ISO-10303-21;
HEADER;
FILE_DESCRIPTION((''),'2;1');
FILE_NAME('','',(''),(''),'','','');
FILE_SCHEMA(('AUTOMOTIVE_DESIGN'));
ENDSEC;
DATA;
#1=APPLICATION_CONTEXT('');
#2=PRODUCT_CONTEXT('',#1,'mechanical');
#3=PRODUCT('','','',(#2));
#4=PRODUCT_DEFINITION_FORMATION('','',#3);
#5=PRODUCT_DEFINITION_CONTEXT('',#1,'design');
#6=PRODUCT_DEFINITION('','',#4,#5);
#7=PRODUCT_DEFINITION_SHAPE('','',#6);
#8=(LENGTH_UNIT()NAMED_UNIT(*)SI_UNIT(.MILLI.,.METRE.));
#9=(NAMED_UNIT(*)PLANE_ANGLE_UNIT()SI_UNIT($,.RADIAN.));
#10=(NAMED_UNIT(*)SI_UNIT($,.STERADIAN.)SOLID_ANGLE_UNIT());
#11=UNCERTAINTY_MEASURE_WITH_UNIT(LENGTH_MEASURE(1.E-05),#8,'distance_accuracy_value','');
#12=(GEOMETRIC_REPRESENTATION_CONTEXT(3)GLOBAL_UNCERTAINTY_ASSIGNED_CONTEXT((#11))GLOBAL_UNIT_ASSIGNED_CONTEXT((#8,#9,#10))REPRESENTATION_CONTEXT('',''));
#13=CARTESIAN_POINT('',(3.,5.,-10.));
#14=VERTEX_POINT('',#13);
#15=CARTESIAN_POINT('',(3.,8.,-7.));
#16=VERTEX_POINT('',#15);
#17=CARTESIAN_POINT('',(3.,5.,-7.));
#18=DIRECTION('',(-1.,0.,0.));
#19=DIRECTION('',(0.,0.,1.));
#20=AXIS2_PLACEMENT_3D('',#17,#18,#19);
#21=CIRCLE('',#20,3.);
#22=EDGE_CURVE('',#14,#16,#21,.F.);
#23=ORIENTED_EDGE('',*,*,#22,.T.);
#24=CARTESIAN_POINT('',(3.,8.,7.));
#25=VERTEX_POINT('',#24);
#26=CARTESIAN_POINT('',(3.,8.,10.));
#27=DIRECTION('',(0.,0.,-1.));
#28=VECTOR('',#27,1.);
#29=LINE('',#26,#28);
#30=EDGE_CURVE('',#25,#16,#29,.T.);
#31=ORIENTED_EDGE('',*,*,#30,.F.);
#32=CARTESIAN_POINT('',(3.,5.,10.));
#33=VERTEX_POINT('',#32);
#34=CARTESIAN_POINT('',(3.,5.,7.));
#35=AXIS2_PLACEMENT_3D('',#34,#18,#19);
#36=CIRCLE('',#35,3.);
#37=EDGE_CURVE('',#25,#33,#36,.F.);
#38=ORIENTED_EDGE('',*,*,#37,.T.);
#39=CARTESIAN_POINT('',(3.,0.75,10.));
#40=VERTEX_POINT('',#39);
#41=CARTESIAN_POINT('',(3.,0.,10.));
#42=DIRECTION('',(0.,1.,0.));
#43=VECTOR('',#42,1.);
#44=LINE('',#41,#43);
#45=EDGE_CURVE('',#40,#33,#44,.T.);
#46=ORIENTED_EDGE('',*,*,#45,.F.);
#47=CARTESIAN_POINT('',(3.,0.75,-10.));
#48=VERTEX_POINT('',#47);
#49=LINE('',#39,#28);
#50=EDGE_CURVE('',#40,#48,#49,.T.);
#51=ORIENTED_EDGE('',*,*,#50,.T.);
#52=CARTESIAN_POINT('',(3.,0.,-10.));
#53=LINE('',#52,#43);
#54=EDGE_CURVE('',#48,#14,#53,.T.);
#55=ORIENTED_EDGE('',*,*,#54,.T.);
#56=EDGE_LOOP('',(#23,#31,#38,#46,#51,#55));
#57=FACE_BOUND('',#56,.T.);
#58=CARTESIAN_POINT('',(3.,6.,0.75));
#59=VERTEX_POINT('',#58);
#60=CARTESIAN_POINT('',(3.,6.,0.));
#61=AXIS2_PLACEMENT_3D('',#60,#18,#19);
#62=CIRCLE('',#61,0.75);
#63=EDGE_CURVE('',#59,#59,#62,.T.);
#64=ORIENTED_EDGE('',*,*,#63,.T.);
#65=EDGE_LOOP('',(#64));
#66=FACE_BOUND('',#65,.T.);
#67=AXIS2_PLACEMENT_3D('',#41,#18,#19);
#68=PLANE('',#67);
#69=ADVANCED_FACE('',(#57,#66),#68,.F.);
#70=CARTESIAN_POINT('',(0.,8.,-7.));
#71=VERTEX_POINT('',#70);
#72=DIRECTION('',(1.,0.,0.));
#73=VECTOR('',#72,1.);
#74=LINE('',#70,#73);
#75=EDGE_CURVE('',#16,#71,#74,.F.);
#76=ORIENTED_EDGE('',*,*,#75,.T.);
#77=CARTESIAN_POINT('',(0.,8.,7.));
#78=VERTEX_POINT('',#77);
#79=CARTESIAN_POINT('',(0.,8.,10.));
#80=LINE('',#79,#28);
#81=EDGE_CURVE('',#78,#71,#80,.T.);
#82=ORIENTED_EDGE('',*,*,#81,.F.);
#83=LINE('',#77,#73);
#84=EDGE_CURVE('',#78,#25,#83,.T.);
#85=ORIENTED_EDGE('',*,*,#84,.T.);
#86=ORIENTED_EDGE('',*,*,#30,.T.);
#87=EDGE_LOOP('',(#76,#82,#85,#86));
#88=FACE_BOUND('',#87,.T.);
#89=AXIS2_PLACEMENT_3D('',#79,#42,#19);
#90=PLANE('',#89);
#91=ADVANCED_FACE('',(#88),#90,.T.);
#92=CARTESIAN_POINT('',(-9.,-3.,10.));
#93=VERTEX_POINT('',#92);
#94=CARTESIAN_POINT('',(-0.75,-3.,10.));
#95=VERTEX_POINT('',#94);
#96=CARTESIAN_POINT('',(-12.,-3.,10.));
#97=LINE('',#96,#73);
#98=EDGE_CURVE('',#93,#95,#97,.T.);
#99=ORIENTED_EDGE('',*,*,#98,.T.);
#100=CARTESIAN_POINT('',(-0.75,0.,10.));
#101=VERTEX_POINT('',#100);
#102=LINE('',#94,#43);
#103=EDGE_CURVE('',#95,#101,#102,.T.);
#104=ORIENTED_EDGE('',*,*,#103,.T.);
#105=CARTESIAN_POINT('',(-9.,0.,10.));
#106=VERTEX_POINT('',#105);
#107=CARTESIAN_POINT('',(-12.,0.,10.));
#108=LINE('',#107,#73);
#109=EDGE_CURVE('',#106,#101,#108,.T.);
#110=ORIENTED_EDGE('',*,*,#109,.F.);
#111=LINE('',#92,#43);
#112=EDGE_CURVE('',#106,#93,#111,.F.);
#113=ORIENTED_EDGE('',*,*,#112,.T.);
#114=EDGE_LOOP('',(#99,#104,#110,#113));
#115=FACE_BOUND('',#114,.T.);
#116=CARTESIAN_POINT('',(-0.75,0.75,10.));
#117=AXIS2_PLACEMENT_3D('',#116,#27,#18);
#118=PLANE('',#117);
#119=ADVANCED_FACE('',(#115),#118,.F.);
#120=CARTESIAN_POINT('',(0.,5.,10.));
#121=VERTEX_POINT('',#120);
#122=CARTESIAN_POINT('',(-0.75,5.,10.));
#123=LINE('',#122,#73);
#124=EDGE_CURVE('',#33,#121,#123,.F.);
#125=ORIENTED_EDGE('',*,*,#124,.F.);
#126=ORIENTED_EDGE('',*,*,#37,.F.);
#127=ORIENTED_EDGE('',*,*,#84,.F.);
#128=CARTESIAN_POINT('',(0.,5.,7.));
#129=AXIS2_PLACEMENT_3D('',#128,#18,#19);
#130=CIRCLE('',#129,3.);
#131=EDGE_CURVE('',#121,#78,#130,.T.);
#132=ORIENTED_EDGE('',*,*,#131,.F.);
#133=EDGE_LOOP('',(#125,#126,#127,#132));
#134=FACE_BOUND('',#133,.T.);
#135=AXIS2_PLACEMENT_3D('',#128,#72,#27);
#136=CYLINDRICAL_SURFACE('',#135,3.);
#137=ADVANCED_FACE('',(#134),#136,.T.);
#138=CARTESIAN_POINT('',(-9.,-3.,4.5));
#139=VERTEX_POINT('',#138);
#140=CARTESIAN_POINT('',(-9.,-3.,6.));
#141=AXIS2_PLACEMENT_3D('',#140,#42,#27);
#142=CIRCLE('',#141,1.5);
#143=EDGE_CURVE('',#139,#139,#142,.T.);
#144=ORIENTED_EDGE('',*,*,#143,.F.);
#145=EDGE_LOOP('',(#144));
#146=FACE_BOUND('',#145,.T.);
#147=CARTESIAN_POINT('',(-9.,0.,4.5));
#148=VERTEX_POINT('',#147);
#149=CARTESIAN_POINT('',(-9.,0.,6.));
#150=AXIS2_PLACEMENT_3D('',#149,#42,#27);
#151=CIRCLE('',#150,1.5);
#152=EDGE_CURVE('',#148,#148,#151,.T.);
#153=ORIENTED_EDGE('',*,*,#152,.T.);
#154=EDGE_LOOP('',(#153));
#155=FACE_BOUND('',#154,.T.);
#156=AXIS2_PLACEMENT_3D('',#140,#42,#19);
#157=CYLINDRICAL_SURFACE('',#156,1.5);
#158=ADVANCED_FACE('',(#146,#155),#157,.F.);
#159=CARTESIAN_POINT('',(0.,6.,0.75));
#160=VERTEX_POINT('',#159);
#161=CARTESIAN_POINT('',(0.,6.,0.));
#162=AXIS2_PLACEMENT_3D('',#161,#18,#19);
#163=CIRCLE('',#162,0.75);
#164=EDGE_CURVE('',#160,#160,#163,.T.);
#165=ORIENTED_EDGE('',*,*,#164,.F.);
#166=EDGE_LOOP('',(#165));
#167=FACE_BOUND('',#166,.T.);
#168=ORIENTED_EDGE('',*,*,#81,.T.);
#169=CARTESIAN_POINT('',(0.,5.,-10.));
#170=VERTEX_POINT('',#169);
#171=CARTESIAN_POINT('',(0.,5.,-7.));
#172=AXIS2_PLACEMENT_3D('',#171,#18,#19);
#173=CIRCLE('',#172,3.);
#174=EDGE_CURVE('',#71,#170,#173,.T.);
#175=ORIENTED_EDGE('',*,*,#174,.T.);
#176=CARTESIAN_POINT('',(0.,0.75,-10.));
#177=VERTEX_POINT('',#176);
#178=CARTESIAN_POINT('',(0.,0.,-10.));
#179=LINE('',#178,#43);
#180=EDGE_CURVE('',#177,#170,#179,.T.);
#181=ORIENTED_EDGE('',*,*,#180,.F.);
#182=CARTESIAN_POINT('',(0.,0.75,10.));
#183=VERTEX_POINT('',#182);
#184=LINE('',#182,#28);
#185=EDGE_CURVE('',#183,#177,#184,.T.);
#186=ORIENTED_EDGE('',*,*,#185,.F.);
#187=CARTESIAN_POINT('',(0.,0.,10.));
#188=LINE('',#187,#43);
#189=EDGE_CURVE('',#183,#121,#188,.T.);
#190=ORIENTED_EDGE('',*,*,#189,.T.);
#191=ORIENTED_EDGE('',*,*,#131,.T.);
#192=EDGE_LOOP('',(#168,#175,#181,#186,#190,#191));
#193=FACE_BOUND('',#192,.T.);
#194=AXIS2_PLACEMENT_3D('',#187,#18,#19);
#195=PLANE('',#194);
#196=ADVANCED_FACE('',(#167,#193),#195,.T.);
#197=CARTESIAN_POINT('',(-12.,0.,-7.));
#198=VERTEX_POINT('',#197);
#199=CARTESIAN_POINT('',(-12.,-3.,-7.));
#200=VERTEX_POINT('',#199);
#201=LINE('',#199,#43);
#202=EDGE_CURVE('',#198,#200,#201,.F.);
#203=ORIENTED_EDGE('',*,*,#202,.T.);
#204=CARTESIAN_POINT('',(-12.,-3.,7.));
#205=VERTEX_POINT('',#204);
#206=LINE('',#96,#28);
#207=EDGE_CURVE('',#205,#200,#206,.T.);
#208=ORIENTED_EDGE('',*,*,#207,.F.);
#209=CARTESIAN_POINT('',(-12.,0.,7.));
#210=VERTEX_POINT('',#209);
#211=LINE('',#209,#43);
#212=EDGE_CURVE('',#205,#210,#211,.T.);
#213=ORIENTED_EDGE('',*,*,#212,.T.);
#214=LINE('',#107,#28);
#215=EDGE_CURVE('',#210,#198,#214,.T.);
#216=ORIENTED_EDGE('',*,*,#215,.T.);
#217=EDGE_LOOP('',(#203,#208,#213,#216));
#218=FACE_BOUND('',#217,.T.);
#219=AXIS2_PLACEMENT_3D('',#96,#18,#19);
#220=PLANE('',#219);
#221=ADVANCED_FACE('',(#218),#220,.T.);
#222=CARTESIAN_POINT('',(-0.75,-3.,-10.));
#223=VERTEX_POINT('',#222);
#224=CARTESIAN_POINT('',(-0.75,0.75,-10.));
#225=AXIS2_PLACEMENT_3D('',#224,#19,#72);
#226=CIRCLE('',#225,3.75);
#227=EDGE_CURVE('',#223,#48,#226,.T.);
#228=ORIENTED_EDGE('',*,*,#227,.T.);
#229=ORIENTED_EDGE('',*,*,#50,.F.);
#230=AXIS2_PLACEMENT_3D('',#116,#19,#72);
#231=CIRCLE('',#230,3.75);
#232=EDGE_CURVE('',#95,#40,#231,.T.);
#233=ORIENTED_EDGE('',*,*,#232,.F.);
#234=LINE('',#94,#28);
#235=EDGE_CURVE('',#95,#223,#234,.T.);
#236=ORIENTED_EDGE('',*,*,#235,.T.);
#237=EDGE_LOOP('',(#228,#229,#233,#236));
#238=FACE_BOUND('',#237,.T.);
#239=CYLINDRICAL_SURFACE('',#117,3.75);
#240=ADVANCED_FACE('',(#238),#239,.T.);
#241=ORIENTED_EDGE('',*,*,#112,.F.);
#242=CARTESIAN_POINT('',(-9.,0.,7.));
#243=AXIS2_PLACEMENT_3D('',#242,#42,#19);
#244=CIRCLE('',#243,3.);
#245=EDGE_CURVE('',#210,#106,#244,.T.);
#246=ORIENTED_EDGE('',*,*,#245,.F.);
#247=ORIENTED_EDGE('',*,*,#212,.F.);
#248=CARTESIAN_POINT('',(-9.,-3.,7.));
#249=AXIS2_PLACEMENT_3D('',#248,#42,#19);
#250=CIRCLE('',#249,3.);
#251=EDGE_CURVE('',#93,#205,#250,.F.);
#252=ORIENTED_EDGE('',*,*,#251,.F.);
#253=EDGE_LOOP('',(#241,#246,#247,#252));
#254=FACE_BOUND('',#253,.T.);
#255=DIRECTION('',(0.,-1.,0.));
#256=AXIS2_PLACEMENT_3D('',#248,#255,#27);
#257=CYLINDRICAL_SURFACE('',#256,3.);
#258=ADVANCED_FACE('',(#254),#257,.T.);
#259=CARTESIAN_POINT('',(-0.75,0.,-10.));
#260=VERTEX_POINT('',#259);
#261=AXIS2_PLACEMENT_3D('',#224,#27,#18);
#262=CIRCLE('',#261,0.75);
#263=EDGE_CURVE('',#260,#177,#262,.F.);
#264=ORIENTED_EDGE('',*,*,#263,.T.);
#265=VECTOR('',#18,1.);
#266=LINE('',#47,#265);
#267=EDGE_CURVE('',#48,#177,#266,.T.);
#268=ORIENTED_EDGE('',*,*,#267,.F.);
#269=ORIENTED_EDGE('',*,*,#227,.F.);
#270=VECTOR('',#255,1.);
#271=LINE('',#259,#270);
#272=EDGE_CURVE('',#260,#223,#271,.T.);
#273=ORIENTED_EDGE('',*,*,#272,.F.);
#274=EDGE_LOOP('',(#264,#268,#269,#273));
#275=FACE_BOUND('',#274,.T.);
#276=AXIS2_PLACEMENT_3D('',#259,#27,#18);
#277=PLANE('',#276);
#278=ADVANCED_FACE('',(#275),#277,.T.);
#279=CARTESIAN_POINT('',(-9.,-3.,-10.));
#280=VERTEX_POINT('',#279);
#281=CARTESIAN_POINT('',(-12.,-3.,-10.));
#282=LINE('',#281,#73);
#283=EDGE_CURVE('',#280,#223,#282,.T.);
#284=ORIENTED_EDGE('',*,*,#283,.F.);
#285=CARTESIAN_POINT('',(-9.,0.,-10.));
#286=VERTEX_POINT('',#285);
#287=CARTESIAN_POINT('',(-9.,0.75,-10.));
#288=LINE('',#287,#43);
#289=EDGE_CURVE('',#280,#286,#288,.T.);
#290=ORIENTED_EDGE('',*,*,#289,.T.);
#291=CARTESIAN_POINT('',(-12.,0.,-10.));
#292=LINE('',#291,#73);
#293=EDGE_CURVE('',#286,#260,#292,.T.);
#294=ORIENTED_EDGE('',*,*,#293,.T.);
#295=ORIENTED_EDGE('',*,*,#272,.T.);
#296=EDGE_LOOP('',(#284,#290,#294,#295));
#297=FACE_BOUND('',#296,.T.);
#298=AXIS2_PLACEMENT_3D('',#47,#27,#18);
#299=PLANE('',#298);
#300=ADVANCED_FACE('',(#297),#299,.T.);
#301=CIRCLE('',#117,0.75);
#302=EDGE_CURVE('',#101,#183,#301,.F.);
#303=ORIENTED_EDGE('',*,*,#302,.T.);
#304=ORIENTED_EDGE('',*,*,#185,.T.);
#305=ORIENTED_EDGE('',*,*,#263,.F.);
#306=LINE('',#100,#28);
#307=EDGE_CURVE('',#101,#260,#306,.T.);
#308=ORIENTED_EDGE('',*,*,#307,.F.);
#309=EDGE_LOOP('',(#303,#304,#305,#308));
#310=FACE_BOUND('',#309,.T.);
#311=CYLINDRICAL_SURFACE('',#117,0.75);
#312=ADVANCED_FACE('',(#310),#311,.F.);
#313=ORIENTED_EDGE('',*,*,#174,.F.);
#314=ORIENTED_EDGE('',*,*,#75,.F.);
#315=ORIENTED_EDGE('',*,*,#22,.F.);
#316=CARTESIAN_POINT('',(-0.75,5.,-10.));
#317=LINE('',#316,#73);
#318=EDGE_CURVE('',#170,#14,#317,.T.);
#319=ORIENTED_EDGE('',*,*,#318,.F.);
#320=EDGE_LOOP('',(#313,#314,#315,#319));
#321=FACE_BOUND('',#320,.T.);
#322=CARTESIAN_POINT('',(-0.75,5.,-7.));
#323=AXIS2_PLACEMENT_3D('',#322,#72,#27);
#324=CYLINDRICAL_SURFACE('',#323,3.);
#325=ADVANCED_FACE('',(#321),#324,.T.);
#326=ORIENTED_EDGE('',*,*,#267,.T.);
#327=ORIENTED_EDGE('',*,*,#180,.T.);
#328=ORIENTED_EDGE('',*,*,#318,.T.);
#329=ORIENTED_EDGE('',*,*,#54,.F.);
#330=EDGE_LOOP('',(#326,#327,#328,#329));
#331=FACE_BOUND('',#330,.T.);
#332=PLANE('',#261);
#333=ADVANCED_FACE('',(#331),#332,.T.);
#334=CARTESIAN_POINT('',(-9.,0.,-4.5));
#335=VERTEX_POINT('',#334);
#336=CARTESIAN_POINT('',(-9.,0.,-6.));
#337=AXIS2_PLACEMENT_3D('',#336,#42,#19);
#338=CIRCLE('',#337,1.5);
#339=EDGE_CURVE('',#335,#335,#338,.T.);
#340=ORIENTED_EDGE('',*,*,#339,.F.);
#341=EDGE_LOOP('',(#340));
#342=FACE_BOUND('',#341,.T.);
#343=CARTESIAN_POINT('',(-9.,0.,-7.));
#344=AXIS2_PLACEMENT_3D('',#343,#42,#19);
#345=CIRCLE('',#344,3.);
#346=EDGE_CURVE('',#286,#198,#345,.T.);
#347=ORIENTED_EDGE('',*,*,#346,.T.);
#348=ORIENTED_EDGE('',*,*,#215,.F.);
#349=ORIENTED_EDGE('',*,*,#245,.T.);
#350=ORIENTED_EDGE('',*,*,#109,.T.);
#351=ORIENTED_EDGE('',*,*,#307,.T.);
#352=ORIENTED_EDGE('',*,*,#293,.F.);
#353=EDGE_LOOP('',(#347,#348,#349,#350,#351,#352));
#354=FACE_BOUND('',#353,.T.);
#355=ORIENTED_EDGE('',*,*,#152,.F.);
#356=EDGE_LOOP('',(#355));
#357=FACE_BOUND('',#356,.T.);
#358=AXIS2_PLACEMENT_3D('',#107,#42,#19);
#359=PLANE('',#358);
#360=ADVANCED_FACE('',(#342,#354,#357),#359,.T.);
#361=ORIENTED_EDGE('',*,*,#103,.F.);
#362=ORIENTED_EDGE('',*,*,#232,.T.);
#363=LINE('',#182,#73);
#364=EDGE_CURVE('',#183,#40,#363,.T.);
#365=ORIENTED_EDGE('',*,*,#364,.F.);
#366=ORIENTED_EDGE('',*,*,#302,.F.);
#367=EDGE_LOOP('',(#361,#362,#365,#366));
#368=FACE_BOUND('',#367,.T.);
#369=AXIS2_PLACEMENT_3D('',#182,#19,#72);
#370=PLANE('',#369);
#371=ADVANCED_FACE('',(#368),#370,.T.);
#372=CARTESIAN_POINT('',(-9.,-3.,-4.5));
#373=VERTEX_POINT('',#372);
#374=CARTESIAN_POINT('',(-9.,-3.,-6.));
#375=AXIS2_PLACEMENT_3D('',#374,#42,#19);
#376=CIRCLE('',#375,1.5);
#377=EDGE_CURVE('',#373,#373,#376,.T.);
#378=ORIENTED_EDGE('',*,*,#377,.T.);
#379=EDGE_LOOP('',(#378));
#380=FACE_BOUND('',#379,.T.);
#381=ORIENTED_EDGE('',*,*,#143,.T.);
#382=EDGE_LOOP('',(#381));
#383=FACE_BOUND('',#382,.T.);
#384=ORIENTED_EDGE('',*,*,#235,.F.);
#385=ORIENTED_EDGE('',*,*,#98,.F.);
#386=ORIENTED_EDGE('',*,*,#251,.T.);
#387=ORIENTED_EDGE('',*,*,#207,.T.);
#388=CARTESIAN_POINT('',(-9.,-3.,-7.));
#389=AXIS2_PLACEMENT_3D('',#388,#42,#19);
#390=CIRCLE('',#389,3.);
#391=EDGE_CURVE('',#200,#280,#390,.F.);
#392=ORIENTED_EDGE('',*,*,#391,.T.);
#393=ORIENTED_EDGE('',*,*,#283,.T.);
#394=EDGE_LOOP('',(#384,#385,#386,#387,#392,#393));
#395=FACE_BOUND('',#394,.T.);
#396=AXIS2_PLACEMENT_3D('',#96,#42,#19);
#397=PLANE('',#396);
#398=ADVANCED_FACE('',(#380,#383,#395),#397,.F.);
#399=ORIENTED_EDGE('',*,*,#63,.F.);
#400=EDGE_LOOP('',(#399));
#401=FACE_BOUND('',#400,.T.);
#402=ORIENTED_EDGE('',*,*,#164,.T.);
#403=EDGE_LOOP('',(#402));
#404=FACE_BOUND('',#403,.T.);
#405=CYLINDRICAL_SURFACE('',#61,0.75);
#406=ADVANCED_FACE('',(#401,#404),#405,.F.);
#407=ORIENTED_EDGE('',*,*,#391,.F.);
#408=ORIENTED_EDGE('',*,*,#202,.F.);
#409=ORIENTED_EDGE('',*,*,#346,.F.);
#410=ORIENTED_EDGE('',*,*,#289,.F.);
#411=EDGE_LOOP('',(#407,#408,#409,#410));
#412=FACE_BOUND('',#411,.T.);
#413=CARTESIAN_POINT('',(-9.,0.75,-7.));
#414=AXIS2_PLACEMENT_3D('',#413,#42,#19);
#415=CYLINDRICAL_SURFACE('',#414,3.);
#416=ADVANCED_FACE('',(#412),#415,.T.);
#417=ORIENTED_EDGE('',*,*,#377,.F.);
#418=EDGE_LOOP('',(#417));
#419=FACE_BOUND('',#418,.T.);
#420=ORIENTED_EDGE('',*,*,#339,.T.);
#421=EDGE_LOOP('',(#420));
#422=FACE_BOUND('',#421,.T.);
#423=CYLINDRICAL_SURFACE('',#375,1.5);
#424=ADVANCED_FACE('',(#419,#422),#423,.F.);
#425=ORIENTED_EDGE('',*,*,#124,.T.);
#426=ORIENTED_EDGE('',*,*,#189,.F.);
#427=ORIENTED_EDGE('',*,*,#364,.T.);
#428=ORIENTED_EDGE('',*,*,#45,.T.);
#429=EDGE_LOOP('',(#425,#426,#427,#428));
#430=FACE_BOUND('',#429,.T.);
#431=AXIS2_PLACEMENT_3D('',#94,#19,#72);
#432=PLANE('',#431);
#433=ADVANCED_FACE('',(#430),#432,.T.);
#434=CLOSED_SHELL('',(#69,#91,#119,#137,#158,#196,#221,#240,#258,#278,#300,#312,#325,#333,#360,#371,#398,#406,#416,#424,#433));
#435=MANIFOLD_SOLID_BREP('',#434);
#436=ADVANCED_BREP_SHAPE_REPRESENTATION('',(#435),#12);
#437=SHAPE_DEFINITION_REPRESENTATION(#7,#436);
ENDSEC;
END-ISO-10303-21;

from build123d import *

# Parameters (mm, degrees)
BASE_FLANGE1_DEPTH = 10
FILLET1_R          = 3
SKETCH6_R          = 1.5
CUT_EXTRUDE1_DEPTH = 18.549928775
SKETCH7_R          = 0.75
CUT_EXTRUDE2_DEPTH = 18.549928775


# Sheet-metal steps are written as plain solids
with BuildPart() as part:
    # Sketch1 → Base-Flange1 (new, symmetric)
    with BuildSketch(Plane.XY):
        with BuildLine():
            Line((-12, 0), (-0.75, 0))
            ThreePointArc((-0.75, 0), (-0.219669914, 0.219669914), (0, 0.75))
            Line((0, 0.75), (0, 8))
            Line((0, 8), (3, 8))
            Line((3, 8), (3, 0.75))
            ThreePointArc((3, 0.75), (1.901650429, -1.901650429), (-0.75, -3))
            Line((-0.75, -3), (-12, -3))
            Line((-12, -3), (-12, 0))
        make_face()
    extrude(amount=BASE_FLANGE1_DEPTH, both=True)

    # Fillet1
    fillet1_edges = [part.edges().sort_by_distance(p)[0] for p in [
        (-12, -1.5, 10),
        (-12, -1.5, -10),
        (1.5, 8, 10),
        (1.5, 8, -10),
    ]]
    fillet(fillet1_edges, radius=FILLET1_R)

    # Sketch6 → Cut-Extrude1 (cut, through all)
    with BuildSketch(Plane(origin=(0, 0, 0), x_dir=(1, 0, 0), z_dir=(0, 1, 0))):
        with Locations(Location((-9, 6, 0), (0, 0, 270))):
            Circle(SKETCH6_R)
        with Locations(Location((-9, -6, 0), (0, 0, 90))):
            Circle(SKETCH6_R)
    extrude(amount=-CUT_EXTRUDE1_DEPTH, mode=Mode.SUBTRACT)

    # Sketch7 → Cut-Extrude2 (cut, through all)
    with BuildSketch(Plane.ZY):
        with Locations((0, 6)):
            Circle(SKETCH7_R)
    extrude(amount=-CUT_EXTRUDE2_DEPTH, mode=Mode.SUBTRACT)


solid = part.part
